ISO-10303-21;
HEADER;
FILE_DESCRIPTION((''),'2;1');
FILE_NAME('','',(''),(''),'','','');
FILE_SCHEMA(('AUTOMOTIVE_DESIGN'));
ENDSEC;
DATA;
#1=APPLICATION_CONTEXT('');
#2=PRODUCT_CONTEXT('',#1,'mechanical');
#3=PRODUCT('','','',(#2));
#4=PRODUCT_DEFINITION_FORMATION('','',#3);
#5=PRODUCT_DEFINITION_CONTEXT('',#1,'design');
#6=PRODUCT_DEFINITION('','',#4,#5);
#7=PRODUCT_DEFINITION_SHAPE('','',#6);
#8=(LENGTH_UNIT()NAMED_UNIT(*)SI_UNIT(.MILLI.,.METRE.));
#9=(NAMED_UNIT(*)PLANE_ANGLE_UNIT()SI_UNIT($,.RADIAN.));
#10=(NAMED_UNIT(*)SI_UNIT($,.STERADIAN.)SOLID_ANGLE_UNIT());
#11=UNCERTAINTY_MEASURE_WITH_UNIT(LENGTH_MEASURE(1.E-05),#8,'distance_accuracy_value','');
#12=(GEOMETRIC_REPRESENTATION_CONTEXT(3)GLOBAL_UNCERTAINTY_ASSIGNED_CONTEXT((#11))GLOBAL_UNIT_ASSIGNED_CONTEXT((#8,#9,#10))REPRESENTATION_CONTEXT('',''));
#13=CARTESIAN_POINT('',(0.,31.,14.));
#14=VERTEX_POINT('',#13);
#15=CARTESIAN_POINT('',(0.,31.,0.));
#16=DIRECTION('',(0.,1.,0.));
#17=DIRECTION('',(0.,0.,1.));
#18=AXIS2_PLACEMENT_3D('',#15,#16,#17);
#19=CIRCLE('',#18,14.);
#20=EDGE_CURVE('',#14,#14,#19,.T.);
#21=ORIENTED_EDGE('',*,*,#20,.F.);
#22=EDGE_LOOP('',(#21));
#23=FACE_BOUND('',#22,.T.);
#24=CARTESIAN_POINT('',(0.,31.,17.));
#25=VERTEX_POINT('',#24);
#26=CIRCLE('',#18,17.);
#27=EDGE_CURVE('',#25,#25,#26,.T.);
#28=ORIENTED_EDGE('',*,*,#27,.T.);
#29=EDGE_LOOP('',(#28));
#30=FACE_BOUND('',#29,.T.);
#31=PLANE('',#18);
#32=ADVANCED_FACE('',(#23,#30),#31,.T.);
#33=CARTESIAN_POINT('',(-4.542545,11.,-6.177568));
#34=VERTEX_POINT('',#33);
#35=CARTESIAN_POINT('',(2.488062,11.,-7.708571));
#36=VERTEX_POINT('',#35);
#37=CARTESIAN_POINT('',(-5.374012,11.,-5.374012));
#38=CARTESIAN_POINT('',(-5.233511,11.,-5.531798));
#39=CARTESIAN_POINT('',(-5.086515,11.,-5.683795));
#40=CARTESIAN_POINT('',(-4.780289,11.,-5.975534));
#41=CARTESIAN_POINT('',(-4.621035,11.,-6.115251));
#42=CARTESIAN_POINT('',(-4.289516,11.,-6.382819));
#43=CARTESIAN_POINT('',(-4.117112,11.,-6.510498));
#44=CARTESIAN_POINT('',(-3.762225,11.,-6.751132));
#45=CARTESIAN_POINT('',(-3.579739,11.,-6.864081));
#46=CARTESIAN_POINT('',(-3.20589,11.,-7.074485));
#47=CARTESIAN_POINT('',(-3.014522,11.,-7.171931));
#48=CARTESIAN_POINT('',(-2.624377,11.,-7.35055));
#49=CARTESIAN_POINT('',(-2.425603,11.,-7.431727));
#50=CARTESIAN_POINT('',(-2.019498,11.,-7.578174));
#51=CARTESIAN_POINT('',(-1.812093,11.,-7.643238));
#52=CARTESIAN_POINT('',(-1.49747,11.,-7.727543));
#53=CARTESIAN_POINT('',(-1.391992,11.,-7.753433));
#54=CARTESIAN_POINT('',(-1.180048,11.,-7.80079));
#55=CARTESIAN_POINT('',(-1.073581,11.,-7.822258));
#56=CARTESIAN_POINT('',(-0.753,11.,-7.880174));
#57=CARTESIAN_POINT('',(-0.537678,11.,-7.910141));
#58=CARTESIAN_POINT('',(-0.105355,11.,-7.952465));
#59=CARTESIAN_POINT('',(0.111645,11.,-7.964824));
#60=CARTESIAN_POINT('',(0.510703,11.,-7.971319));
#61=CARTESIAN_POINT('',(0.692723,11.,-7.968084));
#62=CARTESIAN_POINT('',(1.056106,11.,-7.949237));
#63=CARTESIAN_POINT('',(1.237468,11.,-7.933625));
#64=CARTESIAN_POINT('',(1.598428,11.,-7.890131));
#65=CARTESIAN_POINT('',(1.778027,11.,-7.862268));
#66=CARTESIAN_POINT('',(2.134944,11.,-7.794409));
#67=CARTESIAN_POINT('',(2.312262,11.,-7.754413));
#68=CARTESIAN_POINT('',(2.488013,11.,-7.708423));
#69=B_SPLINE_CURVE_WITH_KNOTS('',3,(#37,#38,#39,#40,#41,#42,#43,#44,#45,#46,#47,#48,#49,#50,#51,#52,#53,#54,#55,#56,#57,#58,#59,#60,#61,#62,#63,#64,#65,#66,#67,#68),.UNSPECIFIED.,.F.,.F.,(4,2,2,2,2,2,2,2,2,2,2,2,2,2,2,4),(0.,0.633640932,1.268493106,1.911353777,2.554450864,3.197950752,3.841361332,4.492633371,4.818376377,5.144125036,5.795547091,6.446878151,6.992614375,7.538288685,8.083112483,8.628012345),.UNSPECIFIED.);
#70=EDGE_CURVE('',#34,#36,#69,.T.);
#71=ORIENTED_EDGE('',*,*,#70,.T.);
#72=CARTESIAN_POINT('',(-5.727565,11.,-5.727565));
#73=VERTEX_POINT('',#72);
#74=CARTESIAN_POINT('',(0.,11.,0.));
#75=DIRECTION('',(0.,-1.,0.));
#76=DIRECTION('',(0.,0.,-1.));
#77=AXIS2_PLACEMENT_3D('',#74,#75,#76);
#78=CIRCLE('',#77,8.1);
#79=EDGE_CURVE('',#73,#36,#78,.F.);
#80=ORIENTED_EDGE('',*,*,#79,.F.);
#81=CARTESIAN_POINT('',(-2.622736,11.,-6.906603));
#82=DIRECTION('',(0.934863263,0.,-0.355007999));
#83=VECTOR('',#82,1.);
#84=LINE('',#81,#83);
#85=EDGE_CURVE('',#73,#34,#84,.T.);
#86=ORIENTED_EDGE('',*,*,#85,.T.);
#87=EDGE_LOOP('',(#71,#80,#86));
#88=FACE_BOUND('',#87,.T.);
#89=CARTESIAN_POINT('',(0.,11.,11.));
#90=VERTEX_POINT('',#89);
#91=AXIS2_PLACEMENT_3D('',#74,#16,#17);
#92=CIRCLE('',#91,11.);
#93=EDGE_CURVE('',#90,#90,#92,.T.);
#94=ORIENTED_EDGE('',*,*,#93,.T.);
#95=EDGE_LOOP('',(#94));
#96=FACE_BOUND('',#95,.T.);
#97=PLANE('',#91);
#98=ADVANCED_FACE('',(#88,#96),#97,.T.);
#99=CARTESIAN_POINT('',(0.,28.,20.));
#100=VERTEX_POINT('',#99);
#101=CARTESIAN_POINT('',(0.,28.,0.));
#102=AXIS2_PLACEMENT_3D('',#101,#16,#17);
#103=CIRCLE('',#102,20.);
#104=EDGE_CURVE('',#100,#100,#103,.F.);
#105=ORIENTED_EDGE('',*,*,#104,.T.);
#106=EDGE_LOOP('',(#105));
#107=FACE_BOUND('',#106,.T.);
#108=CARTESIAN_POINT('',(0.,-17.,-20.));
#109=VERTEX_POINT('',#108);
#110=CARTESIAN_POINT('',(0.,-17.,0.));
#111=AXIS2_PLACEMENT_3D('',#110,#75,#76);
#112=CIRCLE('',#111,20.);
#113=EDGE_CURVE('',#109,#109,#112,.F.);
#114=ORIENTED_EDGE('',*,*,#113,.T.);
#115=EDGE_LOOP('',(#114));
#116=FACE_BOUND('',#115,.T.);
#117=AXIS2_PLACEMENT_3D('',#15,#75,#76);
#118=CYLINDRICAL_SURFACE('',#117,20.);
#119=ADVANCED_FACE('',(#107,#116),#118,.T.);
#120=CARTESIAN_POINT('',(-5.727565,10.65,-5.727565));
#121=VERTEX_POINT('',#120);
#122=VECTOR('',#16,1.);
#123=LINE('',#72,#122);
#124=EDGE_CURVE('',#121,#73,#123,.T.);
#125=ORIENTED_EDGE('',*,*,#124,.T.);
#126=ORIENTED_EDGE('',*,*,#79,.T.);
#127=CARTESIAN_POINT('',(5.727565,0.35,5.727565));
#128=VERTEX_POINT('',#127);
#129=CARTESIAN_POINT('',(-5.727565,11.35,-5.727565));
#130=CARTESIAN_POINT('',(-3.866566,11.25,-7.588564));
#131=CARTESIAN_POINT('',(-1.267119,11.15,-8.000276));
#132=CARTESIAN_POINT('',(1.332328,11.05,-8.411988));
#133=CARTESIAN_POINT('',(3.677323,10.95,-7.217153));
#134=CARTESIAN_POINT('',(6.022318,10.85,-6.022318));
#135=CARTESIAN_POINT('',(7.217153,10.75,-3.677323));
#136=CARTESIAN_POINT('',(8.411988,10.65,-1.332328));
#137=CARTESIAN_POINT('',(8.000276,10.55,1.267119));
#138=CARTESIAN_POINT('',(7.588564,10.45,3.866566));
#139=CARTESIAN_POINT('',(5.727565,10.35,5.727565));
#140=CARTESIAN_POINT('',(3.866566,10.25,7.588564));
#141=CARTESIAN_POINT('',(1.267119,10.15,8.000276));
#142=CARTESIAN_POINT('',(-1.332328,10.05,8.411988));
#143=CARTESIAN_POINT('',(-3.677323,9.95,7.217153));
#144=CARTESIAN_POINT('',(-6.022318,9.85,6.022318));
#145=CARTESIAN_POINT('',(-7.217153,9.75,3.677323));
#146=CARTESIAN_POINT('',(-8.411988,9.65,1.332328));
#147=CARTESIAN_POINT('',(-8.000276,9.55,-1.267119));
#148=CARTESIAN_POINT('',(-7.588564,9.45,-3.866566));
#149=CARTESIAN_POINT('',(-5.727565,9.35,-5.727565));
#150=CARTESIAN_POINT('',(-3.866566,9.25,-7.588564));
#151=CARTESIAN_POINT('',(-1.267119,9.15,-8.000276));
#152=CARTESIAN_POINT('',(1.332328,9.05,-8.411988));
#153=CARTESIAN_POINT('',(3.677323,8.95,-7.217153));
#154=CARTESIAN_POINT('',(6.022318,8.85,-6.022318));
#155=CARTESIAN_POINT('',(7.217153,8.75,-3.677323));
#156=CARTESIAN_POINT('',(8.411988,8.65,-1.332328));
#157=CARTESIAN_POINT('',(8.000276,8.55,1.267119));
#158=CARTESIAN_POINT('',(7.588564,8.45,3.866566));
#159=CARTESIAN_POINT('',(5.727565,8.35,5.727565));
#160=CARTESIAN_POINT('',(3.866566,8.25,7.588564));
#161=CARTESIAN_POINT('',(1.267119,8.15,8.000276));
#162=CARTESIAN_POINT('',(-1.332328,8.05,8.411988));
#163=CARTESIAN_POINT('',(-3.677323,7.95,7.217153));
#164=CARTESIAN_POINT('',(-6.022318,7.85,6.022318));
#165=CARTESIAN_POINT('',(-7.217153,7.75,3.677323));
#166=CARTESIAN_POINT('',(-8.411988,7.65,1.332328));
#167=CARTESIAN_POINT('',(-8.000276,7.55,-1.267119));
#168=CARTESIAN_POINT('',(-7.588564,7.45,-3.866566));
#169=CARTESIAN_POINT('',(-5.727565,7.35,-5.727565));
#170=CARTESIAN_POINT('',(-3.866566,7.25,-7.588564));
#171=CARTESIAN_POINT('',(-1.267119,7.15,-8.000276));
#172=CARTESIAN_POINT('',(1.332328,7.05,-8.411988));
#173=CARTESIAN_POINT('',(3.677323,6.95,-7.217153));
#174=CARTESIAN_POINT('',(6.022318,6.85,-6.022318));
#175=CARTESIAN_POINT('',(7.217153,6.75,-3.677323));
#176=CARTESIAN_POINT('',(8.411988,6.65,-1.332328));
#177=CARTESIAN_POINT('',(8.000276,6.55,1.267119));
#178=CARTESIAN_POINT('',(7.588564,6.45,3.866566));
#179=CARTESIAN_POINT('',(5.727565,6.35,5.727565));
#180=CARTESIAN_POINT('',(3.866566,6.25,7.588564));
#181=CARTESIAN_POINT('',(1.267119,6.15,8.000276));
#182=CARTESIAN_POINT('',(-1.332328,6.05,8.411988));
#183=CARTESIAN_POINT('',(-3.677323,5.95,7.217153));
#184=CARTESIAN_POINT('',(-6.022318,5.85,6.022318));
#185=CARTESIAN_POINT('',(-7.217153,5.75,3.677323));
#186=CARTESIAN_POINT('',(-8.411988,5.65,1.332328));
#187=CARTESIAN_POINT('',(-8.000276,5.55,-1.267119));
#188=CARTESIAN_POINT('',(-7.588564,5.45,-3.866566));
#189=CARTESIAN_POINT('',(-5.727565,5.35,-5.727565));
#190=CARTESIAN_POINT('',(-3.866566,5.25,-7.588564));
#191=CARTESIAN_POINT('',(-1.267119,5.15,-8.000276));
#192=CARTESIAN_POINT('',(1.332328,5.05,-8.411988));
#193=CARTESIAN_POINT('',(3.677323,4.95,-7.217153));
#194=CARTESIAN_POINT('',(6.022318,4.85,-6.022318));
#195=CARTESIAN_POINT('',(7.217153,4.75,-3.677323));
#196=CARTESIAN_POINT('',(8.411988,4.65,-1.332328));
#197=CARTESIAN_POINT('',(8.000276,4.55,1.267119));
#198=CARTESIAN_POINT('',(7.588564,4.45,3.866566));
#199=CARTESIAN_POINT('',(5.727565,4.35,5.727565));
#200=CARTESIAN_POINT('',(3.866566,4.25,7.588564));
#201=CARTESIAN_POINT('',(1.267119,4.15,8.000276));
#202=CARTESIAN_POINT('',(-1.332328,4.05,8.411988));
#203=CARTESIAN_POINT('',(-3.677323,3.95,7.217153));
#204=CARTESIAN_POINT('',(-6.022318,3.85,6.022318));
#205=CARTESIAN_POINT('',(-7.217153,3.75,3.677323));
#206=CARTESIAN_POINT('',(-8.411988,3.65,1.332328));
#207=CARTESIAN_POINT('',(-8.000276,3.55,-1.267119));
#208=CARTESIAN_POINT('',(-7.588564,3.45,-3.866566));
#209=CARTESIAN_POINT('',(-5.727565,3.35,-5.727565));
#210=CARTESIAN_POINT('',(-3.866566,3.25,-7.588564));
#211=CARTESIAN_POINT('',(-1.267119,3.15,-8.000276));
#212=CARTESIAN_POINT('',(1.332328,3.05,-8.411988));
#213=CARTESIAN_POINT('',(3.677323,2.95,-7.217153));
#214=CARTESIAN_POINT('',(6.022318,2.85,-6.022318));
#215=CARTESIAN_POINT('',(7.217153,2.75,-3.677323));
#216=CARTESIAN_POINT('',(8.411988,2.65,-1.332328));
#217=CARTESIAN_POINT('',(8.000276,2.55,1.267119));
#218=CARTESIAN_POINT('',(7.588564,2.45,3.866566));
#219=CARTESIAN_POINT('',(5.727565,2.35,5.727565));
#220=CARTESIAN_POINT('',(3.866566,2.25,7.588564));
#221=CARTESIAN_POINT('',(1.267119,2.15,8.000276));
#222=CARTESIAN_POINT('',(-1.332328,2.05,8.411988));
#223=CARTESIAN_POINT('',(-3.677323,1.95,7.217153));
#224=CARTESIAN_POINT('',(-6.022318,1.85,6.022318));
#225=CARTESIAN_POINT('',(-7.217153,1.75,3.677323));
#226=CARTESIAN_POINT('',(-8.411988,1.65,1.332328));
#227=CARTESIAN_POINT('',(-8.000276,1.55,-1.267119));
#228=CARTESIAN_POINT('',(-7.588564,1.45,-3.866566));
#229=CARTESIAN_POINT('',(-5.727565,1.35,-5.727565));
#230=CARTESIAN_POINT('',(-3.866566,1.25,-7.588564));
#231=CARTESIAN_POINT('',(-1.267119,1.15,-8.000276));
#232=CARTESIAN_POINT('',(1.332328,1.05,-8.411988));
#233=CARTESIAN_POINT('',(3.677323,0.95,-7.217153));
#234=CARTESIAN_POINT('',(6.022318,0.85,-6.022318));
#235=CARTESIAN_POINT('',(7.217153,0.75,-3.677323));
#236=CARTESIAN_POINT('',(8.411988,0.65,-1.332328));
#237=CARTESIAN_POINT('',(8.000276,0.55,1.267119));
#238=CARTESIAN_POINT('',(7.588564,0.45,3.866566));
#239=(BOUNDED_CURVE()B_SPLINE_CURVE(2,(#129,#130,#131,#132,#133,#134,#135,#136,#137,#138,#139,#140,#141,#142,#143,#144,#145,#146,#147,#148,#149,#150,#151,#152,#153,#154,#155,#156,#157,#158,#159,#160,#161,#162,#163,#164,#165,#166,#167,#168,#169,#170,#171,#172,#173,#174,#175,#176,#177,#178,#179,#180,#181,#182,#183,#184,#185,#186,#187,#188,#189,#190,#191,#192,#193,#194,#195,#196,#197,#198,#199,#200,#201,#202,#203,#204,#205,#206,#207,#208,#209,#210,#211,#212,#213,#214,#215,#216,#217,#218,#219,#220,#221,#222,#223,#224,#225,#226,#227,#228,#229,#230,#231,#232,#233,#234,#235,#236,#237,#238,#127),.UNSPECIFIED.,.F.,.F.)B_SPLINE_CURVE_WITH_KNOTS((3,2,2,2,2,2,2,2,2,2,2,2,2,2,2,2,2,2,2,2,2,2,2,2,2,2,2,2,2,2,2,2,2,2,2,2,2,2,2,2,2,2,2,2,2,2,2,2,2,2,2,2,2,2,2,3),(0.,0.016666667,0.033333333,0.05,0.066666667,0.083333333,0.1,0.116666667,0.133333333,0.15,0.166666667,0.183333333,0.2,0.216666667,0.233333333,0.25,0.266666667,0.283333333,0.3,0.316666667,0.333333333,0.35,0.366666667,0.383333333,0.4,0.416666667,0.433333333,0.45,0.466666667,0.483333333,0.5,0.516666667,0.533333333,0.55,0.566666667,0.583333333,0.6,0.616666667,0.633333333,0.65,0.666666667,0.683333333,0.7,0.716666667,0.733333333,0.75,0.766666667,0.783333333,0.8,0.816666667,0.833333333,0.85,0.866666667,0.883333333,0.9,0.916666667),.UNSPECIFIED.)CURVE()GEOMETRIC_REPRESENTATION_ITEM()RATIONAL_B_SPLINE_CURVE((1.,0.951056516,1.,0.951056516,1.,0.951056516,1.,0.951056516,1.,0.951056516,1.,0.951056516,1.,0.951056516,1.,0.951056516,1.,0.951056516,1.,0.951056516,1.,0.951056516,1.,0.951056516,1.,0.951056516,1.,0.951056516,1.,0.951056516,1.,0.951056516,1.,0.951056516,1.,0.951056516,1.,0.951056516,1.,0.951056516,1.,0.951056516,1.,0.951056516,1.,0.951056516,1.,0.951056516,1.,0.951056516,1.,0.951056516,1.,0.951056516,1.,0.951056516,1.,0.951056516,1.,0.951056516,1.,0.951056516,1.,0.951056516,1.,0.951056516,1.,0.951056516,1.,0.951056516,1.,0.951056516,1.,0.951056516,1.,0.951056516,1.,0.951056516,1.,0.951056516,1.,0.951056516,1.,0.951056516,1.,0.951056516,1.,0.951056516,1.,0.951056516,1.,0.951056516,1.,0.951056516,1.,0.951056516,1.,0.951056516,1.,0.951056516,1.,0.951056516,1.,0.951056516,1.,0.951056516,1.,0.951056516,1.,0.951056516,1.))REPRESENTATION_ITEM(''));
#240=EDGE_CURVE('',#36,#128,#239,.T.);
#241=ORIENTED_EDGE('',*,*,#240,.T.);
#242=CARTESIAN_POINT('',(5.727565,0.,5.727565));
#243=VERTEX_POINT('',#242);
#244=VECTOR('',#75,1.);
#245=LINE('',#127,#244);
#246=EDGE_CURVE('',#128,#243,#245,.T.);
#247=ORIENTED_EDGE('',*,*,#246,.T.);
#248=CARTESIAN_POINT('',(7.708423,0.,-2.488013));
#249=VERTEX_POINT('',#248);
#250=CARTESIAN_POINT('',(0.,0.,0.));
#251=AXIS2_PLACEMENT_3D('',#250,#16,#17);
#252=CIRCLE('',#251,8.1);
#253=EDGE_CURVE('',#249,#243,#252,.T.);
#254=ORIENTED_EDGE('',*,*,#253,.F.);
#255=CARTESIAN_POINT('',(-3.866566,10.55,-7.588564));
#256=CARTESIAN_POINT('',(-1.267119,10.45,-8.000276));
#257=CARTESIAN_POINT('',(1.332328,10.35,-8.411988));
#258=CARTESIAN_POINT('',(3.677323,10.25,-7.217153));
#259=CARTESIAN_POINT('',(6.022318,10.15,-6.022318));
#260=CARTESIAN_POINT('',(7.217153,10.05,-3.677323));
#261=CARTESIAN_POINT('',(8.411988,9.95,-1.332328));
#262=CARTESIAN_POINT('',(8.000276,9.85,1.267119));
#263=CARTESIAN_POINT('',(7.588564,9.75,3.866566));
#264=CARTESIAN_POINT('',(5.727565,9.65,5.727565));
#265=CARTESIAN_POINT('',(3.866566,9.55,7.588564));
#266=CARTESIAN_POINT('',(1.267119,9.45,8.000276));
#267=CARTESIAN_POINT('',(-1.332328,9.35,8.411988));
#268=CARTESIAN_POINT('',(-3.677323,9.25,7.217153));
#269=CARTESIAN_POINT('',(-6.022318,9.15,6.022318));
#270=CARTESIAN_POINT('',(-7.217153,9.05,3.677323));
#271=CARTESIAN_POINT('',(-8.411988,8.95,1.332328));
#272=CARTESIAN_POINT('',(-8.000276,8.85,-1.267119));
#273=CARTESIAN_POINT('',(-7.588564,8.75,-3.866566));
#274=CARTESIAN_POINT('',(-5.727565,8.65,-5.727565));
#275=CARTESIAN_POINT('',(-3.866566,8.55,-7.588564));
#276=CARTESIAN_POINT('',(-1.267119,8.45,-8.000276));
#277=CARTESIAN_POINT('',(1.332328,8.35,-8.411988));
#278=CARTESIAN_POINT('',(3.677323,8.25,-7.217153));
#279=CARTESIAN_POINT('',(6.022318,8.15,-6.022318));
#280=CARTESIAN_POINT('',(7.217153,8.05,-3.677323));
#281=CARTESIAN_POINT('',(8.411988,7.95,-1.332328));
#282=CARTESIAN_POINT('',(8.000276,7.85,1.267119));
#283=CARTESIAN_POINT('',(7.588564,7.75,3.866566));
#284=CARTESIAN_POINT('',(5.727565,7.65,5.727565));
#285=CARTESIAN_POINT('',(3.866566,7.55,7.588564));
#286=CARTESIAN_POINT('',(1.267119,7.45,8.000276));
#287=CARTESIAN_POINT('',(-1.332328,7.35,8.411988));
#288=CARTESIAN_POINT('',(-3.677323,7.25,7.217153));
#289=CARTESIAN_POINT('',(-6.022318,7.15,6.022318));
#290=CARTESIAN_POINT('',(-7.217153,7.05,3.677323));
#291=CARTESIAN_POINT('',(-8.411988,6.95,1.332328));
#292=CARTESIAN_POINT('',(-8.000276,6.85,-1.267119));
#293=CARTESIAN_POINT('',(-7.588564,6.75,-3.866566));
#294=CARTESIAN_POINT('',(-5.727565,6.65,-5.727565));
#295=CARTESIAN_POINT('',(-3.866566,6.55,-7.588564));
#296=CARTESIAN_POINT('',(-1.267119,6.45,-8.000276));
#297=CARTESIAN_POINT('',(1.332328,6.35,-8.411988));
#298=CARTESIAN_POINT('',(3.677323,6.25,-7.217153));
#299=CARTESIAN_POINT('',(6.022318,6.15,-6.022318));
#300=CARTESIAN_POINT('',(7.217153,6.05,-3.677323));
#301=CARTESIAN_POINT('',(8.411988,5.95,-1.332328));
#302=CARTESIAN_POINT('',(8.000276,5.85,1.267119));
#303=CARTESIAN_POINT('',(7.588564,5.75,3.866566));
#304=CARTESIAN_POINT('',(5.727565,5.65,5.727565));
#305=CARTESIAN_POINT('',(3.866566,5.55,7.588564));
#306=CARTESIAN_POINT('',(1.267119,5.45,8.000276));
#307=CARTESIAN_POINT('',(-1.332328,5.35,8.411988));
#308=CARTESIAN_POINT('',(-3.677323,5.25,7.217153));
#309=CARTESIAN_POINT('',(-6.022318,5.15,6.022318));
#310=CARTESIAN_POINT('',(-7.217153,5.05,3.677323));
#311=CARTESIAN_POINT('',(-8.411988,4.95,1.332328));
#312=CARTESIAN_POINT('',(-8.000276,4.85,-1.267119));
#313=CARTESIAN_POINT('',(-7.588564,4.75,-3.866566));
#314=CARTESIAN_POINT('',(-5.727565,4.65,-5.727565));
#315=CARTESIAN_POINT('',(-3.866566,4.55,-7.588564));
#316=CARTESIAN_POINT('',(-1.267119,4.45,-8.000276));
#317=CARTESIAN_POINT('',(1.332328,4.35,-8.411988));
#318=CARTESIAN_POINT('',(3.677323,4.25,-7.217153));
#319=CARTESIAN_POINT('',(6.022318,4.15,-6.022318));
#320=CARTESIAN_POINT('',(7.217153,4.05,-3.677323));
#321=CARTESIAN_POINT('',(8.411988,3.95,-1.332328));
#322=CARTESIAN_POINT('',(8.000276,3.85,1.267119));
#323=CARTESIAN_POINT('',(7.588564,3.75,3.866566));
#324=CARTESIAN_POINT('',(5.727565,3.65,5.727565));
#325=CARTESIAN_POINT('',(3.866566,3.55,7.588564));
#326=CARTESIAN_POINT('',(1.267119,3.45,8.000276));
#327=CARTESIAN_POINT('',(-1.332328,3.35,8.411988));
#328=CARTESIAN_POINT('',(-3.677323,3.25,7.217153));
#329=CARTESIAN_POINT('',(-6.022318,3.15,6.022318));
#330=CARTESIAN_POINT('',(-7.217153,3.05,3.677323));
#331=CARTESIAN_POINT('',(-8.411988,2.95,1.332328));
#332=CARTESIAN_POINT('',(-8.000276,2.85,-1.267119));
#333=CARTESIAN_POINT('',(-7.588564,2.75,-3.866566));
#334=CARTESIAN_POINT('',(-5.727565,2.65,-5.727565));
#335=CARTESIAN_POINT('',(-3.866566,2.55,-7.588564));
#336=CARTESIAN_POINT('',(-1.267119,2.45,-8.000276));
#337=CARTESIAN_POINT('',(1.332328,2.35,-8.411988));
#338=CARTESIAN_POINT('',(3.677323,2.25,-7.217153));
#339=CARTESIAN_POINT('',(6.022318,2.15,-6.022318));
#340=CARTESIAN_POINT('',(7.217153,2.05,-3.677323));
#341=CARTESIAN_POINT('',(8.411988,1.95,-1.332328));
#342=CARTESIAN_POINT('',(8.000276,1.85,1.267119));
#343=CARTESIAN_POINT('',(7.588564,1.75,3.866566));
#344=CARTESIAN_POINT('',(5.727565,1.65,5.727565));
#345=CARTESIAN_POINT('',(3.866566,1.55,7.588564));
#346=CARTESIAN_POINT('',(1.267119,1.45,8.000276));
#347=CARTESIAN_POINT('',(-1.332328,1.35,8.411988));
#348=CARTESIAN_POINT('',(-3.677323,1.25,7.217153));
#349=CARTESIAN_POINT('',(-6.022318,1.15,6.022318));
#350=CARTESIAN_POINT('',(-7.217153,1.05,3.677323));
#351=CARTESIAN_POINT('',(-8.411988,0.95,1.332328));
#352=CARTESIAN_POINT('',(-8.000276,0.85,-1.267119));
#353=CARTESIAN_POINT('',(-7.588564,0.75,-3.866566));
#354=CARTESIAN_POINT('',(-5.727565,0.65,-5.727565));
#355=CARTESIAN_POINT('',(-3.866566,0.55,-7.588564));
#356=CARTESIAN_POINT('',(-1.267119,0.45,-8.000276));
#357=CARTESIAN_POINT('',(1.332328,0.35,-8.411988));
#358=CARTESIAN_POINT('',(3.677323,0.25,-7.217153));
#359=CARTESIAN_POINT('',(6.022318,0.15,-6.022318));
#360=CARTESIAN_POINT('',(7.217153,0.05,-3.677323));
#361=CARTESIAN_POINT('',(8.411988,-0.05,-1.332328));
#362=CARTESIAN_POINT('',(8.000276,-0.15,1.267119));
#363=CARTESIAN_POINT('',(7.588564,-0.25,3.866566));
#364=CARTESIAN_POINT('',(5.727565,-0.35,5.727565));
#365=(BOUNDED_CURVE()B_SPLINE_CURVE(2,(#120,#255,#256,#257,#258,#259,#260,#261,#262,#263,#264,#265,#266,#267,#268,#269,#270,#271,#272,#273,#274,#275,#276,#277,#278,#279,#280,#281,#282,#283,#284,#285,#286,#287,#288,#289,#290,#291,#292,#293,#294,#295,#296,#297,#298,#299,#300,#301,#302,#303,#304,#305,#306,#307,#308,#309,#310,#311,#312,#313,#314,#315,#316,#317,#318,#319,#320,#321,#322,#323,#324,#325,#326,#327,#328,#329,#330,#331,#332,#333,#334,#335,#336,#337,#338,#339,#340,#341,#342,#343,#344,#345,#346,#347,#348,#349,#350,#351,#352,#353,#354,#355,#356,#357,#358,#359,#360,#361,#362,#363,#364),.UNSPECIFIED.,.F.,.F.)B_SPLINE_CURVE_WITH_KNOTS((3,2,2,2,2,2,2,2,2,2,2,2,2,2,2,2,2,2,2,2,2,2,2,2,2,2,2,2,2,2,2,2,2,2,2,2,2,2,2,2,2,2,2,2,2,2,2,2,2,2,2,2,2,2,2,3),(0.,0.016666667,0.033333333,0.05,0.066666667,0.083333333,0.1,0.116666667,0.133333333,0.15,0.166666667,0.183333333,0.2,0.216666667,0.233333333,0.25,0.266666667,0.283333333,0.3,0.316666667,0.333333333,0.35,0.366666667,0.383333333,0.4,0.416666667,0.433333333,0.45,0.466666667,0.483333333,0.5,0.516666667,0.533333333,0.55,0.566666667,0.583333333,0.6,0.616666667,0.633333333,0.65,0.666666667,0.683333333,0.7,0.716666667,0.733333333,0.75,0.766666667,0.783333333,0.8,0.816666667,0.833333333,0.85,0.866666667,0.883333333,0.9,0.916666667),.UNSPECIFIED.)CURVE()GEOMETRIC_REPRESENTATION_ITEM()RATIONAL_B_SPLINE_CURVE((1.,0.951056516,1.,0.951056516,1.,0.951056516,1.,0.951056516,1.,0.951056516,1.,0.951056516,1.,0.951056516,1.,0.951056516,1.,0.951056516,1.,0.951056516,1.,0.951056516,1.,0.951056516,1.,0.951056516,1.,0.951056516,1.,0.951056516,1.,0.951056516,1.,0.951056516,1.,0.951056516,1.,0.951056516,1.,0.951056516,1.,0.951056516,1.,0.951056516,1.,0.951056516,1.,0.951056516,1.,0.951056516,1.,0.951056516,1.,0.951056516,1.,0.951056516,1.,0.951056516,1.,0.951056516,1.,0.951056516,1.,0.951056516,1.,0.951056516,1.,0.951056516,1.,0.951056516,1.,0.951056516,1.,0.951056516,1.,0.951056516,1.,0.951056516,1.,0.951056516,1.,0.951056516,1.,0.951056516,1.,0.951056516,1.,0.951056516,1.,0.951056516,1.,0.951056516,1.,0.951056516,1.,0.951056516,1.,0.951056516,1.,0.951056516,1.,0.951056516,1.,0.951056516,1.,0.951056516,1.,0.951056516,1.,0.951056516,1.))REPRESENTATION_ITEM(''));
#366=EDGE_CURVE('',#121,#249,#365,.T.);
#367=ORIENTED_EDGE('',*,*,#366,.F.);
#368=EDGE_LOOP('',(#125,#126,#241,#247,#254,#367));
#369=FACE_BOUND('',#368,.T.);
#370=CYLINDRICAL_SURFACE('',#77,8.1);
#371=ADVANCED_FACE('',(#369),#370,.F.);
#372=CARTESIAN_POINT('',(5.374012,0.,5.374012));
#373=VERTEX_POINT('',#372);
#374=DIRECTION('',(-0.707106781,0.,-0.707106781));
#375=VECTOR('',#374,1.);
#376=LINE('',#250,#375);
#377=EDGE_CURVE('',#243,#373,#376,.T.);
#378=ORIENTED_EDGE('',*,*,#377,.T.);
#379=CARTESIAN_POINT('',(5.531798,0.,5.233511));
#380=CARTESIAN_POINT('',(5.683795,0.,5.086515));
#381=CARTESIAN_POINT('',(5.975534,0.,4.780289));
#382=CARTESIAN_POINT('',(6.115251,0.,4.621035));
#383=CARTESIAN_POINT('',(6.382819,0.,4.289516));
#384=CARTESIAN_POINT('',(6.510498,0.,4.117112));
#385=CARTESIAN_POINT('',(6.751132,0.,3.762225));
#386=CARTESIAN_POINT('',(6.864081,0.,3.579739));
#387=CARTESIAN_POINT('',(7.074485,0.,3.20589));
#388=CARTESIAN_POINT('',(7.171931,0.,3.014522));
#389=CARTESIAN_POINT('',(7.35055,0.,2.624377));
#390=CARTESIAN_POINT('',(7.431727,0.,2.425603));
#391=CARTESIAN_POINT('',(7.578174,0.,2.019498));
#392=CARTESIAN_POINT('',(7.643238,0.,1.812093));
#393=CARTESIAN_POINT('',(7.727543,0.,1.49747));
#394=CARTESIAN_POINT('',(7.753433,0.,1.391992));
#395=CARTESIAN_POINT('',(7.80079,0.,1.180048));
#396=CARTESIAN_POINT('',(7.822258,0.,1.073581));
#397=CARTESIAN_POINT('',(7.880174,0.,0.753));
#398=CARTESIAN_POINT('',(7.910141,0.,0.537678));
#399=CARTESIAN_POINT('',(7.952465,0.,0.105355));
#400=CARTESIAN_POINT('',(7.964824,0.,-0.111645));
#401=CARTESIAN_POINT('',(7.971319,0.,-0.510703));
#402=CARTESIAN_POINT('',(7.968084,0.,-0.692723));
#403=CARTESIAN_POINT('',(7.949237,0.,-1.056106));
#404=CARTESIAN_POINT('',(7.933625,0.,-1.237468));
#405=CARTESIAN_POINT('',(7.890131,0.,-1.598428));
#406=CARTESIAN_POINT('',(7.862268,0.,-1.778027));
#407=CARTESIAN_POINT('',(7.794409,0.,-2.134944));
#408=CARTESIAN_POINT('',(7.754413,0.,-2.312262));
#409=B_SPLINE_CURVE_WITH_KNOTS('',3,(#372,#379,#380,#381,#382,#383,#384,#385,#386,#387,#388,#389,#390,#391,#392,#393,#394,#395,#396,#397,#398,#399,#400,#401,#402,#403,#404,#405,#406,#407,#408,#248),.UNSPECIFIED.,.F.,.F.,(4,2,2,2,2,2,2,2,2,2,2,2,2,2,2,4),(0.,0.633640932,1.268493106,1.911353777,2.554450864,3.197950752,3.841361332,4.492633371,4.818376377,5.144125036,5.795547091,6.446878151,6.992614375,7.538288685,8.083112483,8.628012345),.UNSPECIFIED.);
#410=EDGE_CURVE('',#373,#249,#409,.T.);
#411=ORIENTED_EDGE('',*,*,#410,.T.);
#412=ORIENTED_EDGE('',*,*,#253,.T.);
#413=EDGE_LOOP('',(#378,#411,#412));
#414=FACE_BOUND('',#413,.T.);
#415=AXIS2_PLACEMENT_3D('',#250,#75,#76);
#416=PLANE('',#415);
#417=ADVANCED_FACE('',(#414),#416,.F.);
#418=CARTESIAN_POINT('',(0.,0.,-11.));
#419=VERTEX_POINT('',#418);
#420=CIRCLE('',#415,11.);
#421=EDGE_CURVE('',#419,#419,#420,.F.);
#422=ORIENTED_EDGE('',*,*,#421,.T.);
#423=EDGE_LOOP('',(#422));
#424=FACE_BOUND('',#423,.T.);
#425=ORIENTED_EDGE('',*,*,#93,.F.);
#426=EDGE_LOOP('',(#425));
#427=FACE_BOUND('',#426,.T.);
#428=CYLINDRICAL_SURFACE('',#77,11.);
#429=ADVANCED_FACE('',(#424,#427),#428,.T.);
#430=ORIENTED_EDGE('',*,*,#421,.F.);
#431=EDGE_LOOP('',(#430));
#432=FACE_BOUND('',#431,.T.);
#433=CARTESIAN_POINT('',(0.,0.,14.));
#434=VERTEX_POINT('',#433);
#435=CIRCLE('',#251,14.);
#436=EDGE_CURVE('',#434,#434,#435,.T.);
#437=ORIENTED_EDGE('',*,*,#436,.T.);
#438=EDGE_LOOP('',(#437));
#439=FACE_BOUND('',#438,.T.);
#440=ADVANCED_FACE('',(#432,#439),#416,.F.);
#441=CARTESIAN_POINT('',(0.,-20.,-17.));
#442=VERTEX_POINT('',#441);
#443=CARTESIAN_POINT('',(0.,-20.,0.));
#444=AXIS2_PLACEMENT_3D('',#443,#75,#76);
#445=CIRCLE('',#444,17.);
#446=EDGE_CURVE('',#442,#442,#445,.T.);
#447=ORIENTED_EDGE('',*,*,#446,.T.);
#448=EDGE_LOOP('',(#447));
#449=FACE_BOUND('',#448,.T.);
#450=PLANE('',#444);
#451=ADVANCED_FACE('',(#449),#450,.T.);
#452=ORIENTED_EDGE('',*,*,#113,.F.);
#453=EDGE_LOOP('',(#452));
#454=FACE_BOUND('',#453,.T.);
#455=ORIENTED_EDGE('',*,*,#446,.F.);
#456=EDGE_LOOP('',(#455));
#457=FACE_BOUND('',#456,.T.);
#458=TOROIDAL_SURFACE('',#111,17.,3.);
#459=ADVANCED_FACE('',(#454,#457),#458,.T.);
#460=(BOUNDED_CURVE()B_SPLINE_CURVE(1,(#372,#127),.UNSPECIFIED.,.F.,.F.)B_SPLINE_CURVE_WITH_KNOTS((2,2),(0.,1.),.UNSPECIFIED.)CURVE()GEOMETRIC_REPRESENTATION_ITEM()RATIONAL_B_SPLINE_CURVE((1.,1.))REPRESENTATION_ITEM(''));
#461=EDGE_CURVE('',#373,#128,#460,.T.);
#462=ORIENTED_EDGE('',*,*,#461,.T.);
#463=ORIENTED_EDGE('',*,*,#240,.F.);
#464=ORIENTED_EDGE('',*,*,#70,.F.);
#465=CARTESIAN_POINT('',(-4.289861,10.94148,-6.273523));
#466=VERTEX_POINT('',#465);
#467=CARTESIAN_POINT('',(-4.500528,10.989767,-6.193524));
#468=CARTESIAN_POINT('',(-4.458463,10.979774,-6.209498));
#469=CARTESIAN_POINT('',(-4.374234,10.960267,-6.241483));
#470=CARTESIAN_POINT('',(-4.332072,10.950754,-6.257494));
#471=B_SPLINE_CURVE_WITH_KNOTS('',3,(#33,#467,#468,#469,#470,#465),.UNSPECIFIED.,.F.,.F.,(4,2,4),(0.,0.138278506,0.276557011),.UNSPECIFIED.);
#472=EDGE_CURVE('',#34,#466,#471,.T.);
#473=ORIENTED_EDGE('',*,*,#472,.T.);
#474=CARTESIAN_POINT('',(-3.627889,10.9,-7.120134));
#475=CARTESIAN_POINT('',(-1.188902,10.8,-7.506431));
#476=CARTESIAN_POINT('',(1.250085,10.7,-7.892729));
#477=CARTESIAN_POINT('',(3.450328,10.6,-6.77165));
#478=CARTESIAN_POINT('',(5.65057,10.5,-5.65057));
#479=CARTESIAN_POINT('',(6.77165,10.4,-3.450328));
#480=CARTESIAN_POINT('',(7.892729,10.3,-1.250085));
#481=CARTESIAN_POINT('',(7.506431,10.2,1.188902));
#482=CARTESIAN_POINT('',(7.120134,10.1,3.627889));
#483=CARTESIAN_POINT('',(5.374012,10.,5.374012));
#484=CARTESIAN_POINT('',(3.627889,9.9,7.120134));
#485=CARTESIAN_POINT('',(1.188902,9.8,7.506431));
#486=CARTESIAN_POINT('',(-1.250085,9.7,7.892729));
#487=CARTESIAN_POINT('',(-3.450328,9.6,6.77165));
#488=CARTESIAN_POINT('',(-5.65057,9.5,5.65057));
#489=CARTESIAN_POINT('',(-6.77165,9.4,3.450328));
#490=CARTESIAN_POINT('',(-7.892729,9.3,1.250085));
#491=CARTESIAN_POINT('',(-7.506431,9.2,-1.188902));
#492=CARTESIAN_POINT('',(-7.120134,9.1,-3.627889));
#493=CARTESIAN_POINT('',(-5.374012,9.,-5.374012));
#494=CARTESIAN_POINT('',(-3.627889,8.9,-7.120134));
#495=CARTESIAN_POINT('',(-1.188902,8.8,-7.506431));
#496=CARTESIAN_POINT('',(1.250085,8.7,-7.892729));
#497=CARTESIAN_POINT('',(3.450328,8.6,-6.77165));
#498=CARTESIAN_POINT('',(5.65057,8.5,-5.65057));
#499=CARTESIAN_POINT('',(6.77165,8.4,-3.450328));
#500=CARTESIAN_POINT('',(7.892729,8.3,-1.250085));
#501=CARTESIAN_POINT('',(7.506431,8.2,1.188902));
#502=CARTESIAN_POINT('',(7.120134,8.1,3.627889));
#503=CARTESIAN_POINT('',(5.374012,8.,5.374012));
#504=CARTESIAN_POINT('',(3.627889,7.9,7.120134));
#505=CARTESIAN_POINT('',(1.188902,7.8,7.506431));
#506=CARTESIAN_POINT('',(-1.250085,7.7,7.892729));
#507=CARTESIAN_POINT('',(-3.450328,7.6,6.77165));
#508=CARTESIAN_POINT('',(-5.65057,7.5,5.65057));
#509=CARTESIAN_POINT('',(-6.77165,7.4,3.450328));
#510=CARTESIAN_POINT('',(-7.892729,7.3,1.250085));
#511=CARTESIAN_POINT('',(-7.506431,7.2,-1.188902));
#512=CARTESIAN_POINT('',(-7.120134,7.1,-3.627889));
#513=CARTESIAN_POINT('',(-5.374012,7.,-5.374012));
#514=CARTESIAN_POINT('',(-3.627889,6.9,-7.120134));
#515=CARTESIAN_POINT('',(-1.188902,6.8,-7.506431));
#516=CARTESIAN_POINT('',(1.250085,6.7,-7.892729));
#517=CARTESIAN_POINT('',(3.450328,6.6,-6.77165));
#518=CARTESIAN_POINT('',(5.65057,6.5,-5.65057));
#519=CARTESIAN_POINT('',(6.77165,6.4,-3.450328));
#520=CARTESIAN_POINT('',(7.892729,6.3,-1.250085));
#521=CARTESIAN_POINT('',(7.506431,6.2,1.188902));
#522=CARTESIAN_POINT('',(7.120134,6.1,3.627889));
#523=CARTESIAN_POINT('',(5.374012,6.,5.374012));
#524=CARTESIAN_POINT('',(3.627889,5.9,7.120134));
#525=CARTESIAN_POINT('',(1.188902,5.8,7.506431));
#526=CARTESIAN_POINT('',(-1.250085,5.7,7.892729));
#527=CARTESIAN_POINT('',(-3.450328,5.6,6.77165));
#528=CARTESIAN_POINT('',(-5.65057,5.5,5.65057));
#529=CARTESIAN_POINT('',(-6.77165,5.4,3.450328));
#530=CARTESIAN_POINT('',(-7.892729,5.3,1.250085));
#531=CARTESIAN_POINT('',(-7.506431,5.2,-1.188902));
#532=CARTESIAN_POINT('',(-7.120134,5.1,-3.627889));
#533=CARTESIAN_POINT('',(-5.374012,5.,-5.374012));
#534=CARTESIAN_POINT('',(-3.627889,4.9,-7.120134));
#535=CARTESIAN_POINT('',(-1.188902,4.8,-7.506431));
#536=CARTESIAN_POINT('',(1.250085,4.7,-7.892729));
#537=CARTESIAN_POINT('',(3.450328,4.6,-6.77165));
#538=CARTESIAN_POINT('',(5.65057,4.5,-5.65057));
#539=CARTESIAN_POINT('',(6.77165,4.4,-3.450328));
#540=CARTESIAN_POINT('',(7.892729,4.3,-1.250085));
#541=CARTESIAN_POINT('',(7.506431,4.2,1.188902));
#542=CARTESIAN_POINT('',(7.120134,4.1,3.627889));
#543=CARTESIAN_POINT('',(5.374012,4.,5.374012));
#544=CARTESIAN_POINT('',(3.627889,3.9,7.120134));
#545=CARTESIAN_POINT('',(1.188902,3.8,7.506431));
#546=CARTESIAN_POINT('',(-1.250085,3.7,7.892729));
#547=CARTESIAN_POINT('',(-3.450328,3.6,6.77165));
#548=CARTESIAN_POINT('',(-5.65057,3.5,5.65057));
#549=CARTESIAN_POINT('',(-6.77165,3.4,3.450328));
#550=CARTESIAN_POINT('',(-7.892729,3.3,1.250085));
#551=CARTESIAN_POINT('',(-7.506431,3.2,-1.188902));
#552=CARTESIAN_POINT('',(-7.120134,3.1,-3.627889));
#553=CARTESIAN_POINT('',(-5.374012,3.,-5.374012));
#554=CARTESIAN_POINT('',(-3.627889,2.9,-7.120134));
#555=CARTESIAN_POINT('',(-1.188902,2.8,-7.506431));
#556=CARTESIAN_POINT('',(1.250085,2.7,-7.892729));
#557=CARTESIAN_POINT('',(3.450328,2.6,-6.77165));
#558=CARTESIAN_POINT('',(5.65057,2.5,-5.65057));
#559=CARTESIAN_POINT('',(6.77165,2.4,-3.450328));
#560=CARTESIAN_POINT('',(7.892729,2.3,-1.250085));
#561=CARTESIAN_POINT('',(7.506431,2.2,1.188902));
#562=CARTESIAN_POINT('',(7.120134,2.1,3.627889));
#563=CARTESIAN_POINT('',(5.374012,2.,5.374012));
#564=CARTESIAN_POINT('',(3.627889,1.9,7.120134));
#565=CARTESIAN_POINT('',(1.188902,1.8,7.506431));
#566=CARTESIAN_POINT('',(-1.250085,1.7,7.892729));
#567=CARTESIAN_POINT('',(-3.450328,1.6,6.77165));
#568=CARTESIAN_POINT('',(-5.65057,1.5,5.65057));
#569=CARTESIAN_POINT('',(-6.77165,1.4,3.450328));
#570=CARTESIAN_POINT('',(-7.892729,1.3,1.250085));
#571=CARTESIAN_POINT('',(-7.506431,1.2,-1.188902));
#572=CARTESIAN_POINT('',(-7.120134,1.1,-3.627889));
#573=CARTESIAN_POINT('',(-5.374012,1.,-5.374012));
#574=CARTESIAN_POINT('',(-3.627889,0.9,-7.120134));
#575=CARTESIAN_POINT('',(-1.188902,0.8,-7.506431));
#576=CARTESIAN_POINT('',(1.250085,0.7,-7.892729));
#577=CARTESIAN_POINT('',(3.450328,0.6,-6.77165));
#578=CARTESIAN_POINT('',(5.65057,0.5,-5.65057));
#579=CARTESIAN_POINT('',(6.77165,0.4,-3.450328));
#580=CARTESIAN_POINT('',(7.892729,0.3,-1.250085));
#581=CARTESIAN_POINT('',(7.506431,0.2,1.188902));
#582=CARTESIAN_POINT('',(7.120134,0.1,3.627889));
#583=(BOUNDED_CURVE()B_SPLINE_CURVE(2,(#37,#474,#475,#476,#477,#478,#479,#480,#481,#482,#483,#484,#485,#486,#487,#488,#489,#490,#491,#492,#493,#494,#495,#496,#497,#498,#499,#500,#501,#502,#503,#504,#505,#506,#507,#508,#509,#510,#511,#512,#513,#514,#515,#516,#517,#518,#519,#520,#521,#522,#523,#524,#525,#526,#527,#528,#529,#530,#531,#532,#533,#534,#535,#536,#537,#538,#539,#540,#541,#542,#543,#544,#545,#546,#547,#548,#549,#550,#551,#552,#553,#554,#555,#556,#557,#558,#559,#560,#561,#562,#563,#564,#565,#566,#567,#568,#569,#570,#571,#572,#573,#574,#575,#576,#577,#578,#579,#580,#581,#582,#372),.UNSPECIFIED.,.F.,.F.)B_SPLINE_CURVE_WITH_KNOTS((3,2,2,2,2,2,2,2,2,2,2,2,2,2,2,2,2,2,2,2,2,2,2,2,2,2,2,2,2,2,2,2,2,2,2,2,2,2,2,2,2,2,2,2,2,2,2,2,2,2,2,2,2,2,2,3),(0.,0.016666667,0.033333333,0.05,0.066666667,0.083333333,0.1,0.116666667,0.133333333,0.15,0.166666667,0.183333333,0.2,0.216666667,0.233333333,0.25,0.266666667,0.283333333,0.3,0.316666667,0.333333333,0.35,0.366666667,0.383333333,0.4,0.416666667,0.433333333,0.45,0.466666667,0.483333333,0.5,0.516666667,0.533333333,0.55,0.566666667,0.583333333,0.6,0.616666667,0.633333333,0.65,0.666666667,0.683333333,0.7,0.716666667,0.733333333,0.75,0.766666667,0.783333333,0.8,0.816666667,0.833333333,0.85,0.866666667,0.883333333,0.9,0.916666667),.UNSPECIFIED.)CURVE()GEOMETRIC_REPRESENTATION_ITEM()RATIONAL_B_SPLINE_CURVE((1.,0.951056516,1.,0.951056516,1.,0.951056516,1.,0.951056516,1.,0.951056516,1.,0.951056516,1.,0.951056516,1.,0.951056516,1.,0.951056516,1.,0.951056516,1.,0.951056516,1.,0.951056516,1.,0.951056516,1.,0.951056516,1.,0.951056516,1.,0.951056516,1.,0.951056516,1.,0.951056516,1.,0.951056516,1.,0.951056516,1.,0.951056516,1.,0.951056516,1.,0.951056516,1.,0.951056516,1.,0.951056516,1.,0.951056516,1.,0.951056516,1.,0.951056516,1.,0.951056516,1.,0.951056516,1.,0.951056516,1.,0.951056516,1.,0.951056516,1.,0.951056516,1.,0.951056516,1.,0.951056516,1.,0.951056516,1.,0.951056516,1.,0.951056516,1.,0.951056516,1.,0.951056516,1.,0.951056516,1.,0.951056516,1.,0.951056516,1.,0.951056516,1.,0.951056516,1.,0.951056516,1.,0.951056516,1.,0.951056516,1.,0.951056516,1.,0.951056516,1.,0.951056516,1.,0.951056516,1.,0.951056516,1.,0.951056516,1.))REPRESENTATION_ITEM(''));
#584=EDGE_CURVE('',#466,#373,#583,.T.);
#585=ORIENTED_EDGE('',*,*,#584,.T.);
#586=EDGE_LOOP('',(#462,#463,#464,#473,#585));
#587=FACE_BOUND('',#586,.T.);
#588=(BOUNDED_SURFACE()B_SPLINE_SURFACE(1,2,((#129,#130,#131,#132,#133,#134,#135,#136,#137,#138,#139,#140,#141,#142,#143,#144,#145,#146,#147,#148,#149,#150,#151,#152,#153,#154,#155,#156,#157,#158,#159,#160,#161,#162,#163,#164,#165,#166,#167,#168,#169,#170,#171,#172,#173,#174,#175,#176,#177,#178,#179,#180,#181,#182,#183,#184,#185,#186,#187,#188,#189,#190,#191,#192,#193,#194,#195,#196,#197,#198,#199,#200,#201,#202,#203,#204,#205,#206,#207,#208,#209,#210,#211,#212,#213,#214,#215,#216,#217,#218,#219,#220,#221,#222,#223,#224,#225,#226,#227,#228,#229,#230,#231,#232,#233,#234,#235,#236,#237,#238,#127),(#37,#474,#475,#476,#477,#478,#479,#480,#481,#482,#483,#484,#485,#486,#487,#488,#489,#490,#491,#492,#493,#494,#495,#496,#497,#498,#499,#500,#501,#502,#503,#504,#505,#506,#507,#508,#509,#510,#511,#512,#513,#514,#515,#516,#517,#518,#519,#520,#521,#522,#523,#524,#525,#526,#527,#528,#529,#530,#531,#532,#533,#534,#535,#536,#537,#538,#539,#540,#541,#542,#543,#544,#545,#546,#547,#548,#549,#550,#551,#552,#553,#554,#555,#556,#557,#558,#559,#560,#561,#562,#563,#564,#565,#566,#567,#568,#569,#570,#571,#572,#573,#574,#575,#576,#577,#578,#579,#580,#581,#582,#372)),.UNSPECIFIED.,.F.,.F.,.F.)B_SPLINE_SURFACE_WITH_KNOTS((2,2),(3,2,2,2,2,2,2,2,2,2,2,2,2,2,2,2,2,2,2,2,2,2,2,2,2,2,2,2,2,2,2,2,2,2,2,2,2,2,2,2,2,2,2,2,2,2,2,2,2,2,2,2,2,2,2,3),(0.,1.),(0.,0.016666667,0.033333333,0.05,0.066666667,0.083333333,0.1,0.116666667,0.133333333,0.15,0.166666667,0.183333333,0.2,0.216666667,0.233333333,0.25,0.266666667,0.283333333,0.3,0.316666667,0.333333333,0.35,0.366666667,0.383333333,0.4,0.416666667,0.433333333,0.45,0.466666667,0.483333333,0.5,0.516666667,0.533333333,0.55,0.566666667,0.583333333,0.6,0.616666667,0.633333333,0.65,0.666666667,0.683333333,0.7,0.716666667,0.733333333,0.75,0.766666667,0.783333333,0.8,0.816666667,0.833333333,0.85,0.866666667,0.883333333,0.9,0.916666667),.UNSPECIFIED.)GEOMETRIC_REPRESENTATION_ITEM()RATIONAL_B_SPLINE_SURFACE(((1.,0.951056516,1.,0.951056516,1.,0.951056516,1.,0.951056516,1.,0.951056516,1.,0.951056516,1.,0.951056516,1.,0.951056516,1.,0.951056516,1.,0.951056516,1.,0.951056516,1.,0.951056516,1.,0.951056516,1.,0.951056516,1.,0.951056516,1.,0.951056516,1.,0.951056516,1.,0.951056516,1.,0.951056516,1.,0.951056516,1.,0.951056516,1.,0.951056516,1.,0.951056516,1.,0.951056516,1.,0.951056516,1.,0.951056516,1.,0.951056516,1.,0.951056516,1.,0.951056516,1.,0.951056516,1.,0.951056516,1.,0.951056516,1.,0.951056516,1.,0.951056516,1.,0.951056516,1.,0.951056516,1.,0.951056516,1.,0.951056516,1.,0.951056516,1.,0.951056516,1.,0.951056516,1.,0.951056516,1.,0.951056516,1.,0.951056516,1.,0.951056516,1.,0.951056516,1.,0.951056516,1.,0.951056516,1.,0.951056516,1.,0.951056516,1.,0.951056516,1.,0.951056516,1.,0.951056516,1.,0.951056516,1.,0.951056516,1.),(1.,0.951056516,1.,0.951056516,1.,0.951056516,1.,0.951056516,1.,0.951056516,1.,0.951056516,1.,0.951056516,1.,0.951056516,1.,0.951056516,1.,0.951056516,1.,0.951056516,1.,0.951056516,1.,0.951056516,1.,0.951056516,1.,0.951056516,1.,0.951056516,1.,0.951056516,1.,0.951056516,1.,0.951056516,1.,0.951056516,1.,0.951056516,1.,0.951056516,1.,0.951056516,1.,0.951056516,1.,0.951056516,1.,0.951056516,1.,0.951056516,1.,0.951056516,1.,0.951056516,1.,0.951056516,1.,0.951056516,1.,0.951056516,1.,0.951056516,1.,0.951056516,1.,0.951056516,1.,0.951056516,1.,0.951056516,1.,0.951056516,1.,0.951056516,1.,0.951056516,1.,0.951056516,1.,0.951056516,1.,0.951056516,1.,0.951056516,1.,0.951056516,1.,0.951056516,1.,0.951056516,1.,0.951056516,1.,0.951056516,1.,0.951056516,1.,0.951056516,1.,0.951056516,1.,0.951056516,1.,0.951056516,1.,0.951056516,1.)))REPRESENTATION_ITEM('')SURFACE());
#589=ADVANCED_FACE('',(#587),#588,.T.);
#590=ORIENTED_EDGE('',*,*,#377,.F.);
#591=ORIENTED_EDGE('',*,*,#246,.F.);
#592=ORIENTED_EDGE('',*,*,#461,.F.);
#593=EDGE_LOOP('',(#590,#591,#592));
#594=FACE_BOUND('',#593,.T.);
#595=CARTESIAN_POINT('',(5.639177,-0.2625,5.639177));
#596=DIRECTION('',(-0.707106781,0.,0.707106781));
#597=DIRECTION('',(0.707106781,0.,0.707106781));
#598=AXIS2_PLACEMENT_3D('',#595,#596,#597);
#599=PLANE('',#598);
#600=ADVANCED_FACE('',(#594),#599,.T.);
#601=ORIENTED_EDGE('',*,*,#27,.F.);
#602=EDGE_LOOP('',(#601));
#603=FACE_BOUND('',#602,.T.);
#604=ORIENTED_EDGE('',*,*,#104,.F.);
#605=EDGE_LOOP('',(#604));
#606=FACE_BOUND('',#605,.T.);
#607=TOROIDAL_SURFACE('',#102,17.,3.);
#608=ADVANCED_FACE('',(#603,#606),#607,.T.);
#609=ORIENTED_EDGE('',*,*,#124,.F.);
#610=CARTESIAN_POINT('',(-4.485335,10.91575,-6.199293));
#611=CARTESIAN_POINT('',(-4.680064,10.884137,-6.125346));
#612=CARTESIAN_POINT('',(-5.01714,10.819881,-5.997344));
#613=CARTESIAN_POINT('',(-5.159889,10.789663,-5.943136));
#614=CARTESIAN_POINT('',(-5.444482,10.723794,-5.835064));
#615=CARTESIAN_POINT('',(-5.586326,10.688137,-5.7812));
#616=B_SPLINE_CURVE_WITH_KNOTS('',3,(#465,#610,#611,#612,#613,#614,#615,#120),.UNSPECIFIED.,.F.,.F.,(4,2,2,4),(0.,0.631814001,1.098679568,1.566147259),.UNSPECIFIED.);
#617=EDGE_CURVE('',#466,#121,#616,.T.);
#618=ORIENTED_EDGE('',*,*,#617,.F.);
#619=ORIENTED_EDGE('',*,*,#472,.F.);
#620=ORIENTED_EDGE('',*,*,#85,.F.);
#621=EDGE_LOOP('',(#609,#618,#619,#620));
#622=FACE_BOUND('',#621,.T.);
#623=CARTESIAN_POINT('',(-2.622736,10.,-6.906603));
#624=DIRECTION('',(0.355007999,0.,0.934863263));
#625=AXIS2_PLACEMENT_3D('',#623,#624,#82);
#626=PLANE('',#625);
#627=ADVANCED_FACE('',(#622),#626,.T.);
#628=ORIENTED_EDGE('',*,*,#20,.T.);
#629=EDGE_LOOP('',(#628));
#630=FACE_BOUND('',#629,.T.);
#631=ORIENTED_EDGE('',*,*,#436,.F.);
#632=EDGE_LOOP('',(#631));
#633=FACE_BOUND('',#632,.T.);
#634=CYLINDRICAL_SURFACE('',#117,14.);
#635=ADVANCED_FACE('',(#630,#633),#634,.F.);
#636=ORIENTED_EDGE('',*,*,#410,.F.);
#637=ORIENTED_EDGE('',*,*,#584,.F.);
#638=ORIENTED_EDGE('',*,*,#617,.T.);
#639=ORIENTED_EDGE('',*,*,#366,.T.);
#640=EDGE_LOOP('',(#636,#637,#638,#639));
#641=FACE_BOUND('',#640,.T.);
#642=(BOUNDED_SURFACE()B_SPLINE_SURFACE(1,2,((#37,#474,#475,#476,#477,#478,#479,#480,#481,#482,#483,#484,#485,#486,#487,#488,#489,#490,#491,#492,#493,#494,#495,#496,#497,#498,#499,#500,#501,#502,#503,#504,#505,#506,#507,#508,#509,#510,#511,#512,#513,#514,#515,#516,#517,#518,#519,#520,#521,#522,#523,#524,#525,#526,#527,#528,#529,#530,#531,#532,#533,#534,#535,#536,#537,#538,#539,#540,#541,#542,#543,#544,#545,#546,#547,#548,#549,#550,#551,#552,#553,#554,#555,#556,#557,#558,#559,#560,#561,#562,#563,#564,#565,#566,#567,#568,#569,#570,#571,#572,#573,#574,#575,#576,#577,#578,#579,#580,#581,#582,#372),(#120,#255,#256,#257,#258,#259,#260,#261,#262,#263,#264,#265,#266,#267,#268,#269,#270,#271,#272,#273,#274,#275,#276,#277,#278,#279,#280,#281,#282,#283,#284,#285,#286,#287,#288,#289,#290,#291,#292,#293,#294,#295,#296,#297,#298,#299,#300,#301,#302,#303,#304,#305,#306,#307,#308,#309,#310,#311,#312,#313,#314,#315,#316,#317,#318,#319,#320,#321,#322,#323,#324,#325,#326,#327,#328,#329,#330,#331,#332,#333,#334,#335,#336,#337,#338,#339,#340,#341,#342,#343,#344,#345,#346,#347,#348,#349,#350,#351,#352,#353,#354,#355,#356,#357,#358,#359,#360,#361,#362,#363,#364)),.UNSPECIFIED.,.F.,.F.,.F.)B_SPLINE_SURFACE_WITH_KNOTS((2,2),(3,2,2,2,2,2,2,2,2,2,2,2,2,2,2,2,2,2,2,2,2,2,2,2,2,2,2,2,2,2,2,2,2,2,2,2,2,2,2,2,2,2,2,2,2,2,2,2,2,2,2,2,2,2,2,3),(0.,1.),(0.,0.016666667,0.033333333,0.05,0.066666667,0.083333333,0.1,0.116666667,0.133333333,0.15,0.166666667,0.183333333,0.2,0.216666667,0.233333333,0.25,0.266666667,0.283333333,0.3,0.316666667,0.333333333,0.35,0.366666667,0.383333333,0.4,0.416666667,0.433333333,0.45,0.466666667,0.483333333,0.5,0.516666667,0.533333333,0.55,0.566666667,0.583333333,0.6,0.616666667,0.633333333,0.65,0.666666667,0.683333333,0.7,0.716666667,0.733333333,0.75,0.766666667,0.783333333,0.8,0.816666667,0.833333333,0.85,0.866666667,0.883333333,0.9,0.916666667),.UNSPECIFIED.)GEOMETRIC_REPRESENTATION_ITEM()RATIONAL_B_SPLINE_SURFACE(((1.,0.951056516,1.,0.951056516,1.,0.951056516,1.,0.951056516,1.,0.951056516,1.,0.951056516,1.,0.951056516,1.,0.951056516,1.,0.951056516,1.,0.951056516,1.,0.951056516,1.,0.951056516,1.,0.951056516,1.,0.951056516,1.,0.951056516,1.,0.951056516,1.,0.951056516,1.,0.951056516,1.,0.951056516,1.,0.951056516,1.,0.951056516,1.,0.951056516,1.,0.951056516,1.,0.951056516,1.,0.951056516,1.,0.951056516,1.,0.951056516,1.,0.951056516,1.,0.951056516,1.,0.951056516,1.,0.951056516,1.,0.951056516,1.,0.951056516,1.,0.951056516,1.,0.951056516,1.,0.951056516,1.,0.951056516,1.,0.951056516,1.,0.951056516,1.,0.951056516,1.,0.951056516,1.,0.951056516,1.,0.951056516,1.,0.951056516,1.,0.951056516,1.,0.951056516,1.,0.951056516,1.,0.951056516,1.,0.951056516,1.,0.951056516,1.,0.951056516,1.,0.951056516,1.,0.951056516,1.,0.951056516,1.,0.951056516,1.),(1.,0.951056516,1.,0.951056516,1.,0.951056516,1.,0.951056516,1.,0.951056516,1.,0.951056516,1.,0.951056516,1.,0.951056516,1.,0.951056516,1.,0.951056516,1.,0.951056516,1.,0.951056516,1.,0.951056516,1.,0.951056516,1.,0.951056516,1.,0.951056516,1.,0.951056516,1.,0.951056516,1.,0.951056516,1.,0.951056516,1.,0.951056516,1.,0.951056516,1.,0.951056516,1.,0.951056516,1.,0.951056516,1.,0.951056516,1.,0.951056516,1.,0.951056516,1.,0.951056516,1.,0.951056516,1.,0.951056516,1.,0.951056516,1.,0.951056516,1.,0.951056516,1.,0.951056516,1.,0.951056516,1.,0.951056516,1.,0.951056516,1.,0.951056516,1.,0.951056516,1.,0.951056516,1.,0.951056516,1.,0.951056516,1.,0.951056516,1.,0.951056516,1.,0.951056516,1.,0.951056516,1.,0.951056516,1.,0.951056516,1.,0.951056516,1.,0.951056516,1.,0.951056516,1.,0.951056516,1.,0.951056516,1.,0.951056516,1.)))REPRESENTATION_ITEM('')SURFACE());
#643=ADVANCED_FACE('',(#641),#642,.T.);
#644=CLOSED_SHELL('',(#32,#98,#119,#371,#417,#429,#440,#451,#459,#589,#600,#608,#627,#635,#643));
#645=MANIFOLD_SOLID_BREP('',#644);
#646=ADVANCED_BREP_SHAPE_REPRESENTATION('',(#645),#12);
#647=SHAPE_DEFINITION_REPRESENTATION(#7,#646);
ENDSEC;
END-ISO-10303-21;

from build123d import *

# Parameters (mm, degrees)
SKETCH_1_R               = 11
SKETCH_1_R_2             = 8.1
EXTRUDE_1_DEPTH          = 11
SWEEP_2_PITCH            = 2
CUT_EXTRUDE_1_DEPTH      = 20.256876011
CUT_EXTRUDE_1_DEPTH_BACK = 20.256876011
SKETCH_8_W               = 20.965644498
SKETCH_8_H               = 3.347195004
CUT_EXTRUDE_2_DEPTH      = 1
SKETCH_1_3_R             = 20
SKETCH_1_3_R_2           = 14
EXTRUDE_2_DEPTH          = 31
SKETCH_2_R               = 20
EXTRUDE_4_DEPTH          = 20
FILLET_1_R               = 3


with BuildPart() as part:
    # 草图1 → 凸台-拉伸1 (new body)
    with BuildSketch(Plane(origin=(0, 0, 0), x_dir=(1, 0, 0), z_dir=(0, 1, 0))):
        with Locations(Location((0, 0, 0), (0, 0, 270))):
            Circle(SKETCH_1_R)
        with Locations(Location((0, 0, 0), (0, 0, 270))):
            Circle(SKETCH_1_R_2, mode=Mode.SUBTRACT)
    extrude(amount=EXTRUDE_1_DEPTH)

    # 扫描2: the profile of 草图7 profile screwed along a right-hand helix of 5.5 turns, 10 arcs to a turn; built about Z, then put on its axis
    sweep_2_z = Axis((0, 0, 0), (0, 0, 1))
    sweep_2_corners = [(8.1003, 0, 0.35021), (8.1003, 0, -0.35021), (7.6, 0, 0)]
    with BuildLine(mode=Mode.PRIVATE) as sweep_2_profile:
        Line(sweep_2_corners[0], sweep_2_corners[1])
        Line(sweep_2_corners[1], sweep_2_corners[2])
        Line(sweep_2_corners[2], sweep_2_corners[0])
    sweep_2_cap = Face(sweep_2_profile.wire())
    sweep_2_turn_angles = [0, 18, 36, 54, 72, 90, 108, 126, 144, 162, 180, 198, 216, 234, 252, 270, 288, 306, 324, 342, 360]
    sweep_2_turn_weights = [1, 0.9510565162951535, 1, 0.9510565162951535, 1, 0.9510565162951535, 1, 0.9510565162951535, 1, 0.9510565162951535, 1, 0.9510565162951535, 1, 0.9510565162951535, 1, 0.9510565162951535, 1, 0.9510565162951535, 1, 0.9510565162951535, 1]
    sweep_2_turn_rails = [Edge.make_bspline([Vector(p[0], p[1], 0).rotate(sweep_2_z, sweep_2_turn_angles[k]) / sweep_2_turn_weights[k] + Vector(0, 0, p[2] + SWEEP_2_PITCH * sweep_2_turn_angles[k] / 360) for k in range(21)], [0, 0, 0, 1, 1, 2, 2, 3, 3, 4, 4, 5, 5, 6, 6, 7, 7, 8, 8, 9, 9, 10, 10, 10], 2, sweep_2_turn_weights) for p in sweep_2_corners]
    sweep_2_turn_sides = [Face.make_surface_from_curves(sweep_2_turn_rails[p[0]], sweep_2_turn_rails[p[1]]) for p in [(0, 1), (1, 2), (2, 0)]]
    sweep_2_last_angles = [1800, 1818, 1836, 1854, 1872, 1890, 1908, 1926, 1944, 1962, 1980]
    sweep_2_last_weights = [1, 0.9510565162951535, 1, 0.9510565162951535, 1, 0.9510565162951535, 1, 0.9510565162951535, 1, 0.9510565162951394, 1]
    sweep_2_last_rails = [Edge.make_bspline([Vector(p[0], p[1], 0).rotate(sweep_2_z, sweep_2_last_angles[k]) / sweep_2_last_weights[k] + Vector(0, 0, p[2] + SWEEP_2_PITCH * sweep_2_last_angles[k] / 360) for k in range(11)], [0, 0, 0, 1, 1, 2, 2, 3, 3, 4, 4, 5, 5, 5], 2, sweep_2_last_weights) for p in sweep_2_corners]
    sweep_2_last_sides = [Face.make_surface_from_curves(sweep_2_last_rails[p[0]], sweep_2_last_rails[p[1]]) for p in [(0, 1), (1, 2), (2, 0)]]
    sweep_2 = Plane(origin=(0, 11, 0), x_dir=(-0.7071067811865537, 0, -0.7071067811865414), z_dir=(0, -1, 0)) * Solid(Shell([*[p.moved(Location((0, 0, SWEEP_2_PITCH * i))) for i in range(5) for p in sweep_2_turn_sides], *sweep_2_last_sides, sweep_2_cap, sweep_2_cap.rotate(sweep_2_z, 1980).moved(Location((0, 0, SWEEP_2_PITCH * 1980 / 360)))]))
    add(sweep_2)

    # 草图8 → 切除-拉伸1 (cut, two sides: drawn at the far end of the back side and taken through both)
    with BuildSketch(Plane(origin=(0, 0, 0), x_dir=(-0.7071067811865536, 0, -0.7071067811865416), z_dir=(0.7071067811865416, 0, -0.7071067811865536)).offset(-CUT_EXTRUDE_1_DEPTH_BACK)):
        with Locations((0.517177751, 12.673597502)):
            Rectangle(SKETCH_8_W, SKETCH_8_H)
    extrude(amount=CUT_EXTRUDE_1_DEPTH + CUT_EXTRUDE_1_DEPTH_BACK, mode=Mode.SUBTRACT)

    # 草图9 → 切除-拉伸2 (cut)
    with BuildSketch(Plane(origin=(0, 11, 0), x_dir=(1, 0, 0), z_dir=(0, 1, 0))):
        Polygon((-5.727564928, 5.727564928), (-4.090744655, 6.349136352), (-5.001356228, 5.001356228), align=None)
    extrude(amount=-CUT_EXTRUDE_2_DEPTH, mode=Mode.SUBTRACT)



with BuildPart() as body_2:
    # 草图1<3> → 凸台-拉伸2 (new body)
    with BuildSketch(Plane(origin=(0, 0, 0), x_dir=(1, 0, 0), z_dir=(0, 1, 0))):
        with Locations(Location((0, 0, 0), (0, 0, 270))):
            Circle(SKETCH_1_3_R)
        with Locations(Location((0, 0, 0), (0, 0, 270))):
            Circle(SKETCH_1_3_R_2, mode=Mode.SUBTRACT)
    extrude(amount=EXTRUDE_2_DEPTH)


with BuildPart() as part_1:
    add(part.part)

    add(body_2.part)  # 凸台-拉伸4 merges body 2
    # 草图2 → 凸台-拉伸4 (add)
    with BuildSketch(Plane.XZ):
        with Locations(Location((0, 0, 0), (0, 0, 270))):
            Circle(SKETCH_2_R)
    extrude(amount=EXTRUDE_4_DEPTH)

    # 圆角1
    # the kernel refuses this fillet: 3 mm, written as the material it takes off along each edge
    with BuildSketch(Plane(origin=(0, 31, 0), x_dir=(0, 0, 1), z_dir=(-1, 0, 0))) as fillet_1_piece_1:
        with BuildLine():
            CenterArc((20 - FILLET_1_R, -FILLET_1_R), FILLET_1_R, 0, 90)
            Line((20, -FILLET_1_R), (20, 0))
            Line((20, 0), (20 - FILLET_1_R, 0))
        make_face()
    revolve(axis=Axis((0, 31, 0), (0, 1, 0)), mode=Mode.SUBTRACT)
    with BuildSketch(Plane(origin=(0, -20, 0), x_dir=(0, 0, -1), z_dir=(-1, 0, 0))) as fillet_1_piece_2:
        with BuildLine():
            CenterArc((20 - FILLET_1_R, -FILLET_1_R), FILLET_1_R, 0, 90)
            Line((20 - FILLET_1_R, 0), (20, 0))
            Line((20, 0), (20, -FILLET_1_R))
        make_face()
    revolve(axis=Axis((0, -20, 0), (0, -1, 0)), mode=Mode.SUBTRACT)


solid = part_1.part
